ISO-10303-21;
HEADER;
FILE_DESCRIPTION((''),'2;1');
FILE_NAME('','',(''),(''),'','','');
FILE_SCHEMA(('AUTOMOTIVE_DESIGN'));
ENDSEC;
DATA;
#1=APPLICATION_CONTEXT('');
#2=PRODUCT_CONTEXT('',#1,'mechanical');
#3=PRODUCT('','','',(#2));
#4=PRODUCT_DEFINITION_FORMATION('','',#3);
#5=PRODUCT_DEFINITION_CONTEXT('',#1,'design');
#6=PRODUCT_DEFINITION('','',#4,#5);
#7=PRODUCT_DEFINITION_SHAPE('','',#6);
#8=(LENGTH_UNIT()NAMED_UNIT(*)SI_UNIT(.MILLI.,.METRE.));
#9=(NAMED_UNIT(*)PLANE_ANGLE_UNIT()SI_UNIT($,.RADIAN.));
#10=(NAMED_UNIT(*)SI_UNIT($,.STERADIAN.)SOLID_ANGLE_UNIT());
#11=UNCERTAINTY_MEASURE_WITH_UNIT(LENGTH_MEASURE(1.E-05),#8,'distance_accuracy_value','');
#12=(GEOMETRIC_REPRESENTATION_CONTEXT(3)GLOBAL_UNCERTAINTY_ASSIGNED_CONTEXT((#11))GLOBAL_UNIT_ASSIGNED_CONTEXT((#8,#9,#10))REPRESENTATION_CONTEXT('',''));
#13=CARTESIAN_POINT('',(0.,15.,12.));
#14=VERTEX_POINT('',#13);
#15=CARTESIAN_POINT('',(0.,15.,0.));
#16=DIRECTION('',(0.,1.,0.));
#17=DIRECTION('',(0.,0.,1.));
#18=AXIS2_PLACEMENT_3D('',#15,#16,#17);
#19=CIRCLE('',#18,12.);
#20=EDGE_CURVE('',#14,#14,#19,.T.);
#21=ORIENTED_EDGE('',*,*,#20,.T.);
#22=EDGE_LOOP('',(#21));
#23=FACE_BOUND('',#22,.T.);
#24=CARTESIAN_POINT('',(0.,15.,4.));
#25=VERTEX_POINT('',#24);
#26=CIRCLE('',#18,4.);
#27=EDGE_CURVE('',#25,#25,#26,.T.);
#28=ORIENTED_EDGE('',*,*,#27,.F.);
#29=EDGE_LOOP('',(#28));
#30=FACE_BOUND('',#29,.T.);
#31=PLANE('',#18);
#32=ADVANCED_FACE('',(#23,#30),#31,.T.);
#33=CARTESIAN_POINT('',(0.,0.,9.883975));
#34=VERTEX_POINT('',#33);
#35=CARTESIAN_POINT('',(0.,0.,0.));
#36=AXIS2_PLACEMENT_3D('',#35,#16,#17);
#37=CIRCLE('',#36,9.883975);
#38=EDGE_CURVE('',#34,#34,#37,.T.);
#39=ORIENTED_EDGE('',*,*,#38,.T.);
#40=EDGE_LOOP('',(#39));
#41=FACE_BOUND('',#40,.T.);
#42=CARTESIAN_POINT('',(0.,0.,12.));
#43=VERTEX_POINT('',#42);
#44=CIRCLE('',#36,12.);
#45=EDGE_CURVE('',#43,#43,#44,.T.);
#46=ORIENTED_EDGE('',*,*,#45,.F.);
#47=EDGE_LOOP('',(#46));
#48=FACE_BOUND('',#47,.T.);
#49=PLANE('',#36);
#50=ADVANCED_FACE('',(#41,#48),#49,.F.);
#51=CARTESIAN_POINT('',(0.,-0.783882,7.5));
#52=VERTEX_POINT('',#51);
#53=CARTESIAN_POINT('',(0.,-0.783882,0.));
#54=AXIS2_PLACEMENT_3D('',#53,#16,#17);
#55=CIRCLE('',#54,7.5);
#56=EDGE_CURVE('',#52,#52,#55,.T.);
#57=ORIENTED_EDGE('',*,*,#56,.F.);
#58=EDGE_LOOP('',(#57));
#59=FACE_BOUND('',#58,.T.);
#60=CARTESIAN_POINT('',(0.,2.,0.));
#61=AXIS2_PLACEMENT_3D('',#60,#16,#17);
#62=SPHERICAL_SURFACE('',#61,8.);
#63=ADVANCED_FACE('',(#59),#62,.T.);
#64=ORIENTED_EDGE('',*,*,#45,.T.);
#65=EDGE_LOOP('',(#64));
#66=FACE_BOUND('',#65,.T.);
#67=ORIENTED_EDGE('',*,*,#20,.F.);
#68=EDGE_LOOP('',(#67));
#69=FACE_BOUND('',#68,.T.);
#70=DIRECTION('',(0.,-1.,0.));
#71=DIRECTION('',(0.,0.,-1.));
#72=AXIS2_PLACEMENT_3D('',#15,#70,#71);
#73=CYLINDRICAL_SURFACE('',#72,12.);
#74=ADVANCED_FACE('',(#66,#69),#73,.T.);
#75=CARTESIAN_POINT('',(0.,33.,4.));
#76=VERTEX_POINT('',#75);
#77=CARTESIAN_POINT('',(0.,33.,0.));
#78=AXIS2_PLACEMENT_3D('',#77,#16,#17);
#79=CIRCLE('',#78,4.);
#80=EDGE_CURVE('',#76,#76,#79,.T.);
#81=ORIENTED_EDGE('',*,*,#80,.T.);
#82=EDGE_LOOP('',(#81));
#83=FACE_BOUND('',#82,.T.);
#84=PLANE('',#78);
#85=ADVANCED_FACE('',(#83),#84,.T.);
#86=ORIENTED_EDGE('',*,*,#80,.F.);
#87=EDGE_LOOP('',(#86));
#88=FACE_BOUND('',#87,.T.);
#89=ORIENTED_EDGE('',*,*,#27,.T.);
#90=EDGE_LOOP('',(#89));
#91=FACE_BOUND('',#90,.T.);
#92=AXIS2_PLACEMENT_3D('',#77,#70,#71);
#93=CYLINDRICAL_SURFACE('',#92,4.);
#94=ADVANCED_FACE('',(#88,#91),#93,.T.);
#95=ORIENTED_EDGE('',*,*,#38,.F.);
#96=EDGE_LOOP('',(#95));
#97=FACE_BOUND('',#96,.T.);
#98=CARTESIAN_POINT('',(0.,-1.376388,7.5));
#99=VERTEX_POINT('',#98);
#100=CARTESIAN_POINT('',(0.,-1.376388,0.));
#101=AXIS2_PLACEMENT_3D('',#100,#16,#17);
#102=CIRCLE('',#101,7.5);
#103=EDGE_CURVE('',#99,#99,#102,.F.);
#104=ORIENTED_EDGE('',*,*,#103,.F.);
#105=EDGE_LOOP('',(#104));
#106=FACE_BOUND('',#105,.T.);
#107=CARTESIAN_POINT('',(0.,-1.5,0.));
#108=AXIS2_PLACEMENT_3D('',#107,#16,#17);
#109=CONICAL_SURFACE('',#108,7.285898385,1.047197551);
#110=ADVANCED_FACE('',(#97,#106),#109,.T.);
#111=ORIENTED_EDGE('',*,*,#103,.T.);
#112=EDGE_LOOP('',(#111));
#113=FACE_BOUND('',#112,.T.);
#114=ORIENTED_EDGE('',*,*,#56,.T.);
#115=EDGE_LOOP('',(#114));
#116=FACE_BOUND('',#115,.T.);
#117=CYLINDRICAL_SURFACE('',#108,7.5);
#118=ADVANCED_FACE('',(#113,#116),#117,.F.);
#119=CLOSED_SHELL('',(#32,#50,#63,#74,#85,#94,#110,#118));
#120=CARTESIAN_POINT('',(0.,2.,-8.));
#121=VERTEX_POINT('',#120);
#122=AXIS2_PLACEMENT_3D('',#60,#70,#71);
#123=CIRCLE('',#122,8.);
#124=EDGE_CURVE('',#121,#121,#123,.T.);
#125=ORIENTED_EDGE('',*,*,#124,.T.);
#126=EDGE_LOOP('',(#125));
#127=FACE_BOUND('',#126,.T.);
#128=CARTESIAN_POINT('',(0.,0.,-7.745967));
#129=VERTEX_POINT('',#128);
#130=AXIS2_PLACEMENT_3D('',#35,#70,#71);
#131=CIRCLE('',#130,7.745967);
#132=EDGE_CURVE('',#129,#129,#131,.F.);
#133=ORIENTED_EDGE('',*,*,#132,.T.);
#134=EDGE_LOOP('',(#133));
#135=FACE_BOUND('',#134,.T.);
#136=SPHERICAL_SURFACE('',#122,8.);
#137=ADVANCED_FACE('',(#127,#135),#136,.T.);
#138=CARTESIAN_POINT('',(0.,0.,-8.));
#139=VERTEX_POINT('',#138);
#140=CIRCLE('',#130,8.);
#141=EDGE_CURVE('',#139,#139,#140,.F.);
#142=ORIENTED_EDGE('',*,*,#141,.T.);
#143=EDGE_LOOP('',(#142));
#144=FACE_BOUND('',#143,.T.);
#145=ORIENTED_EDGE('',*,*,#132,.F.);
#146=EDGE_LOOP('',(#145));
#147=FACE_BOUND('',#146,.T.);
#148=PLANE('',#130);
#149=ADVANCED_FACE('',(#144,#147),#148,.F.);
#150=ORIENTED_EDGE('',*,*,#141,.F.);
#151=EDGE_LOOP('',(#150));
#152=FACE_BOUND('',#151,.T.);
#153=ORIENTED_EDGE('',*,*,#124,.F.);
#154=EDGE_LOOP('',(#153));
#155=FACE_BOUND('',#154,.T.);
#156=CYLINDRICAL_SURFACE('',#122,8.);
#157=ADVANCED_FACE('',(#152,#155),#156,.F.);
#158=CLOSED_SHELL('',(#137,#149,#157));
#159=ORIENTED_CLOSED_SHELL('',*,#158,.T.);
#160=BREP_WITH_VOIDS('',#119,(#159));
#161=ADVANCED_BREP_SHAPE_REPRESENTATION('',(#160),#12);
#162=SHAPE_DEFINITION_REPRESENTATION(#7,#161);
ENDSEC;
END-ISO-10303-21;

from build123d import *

# Parameters (mm, degrees)
SKETCH1_R           = 12
BOSS_EXTRUDE1_DEPTH = 15
SKETCH2_R           = 4
BOSS_EXTRUDE2_DEPTH = 18
SKETCH4_R           = 8
CUT_EXTRUDE1_DEPTH  = 2
DOME1_FACE_RADIUS   = 8
DOME1_HEIGHT        = 8
SKETCH5_R           = 10.75
SKETCH5_R_2         = 7.5
BOSS_EXTRUDE3_DEPTH = 1.5
CHAMFER1_SIZE       = 2
CHAMFER1_SIZE_2     = 3.464101615


with BuildPart() as part:
    # Sketch1 → Boss-Extrude1 (new body)
    with BuildSketch(Plane(origin=(0, 0, 0), x_dir=(1, 0, 0), z_dir=(0, 1, 0))):
        with Locations(Location((0, 0, 0), (0, 0, 270))):
            Circle(SKETCH1_R)
    extrude(amount=BOSS_EXTRUDE1_DEPTH)

    # Sketch2 → Boss-Extrude2 (add)
    with BuildSketch(Plane(origin=(0, 15, 0), x_dir=(1, 0, 0), z_dir=(0, 1, 0))):
        with Locations(Location((0, 0, 0), (0, 0, 270))):
            Circle(SKETCH2_R)
    extrude(amount=BOSS_EXTRUDE2_DEPTH)

    # Sketch4 → Cut-Extrude1 (cut)
    with BuildSketch(Plane.XZ):
        with Locations(Location((0, 0, 0), (0, 0, 270))):
            Circle(SKETCH4_R)
    extrude(amount=-CUT_EXTRUDE1_DEPTH, mode=Mode.SUBTRACT)

    # Dome1: a dome of height H over a round flat face of radius A is a cap of a sphere of radius (A * A + H * H) / (2 * H)
    dome1_r = (DOME1_FACE_RADIUS * DOME1_FACE_RADIUS + DOME1_HEIGHT * DOME1_HEIGHT) / (2 * DOME1_HEIGHT)
    dome1_base = Plane((0, 2, 0), z_dir=(0, -1, 0))
    with Locations(dome1_base.offset(DOME1_HEIGHT - dome1_r)):
        dome1_ball = Sphere(dome1_r, mode=Mode.PRIVATE)
    add(split(dome1_ball, bisect_by=dome1_base, keep=Keep.TOP, mode=Mode.PRIVATE))

    # Sketch5 → Boss-Extrude3 (add)
    with BuildSketch(Plane.XZ):
        with Locations(Location((0, 0, 0), (0, 0, 90))):
            Circle(SKETCH5_R)
        with Locations(Location((0, 0, 0), (0, 0, 90))):
            Circle(SKETCH5_R_2, mode=Mode.SUBTRACT)
    extrude(amount=BOSS_EXTRUDE3_DEPTH)

    # Chamfer1
    # the kernel refuses this chamfer: 3.464101615, 2 mm, written as the material it takes off along each edge
    with BuildSketch(Plane(origin=(0, -1.5, 0), x_dir=(0, 0, 1), z_dir=(1, 0, 0))) as chamfer1_piece_1_section:
        Polygon((10.75, -CHAMFER1_SIZE), (10.75 - CHAMFER1_SIZE_2, 0), (10.75, 0), align=None)
    chamfer1_piece_1 = revolve(axis=Axis((0, -1.5, 0), (0, -1, 0)), mode=Mode.PRIVATE)
    chamfer1_piece_1 = split(chamfer1_piece_1, bisect_by=Plane(origin=(0, 0, -8.554997787), z_dir=(0, -1, 0)), keep=Keep.TOP, mode=Mode.PRIVATE)
    add(chamfer1_piece_1, mode=Mode.SUBTRACT)


solid = part.part
